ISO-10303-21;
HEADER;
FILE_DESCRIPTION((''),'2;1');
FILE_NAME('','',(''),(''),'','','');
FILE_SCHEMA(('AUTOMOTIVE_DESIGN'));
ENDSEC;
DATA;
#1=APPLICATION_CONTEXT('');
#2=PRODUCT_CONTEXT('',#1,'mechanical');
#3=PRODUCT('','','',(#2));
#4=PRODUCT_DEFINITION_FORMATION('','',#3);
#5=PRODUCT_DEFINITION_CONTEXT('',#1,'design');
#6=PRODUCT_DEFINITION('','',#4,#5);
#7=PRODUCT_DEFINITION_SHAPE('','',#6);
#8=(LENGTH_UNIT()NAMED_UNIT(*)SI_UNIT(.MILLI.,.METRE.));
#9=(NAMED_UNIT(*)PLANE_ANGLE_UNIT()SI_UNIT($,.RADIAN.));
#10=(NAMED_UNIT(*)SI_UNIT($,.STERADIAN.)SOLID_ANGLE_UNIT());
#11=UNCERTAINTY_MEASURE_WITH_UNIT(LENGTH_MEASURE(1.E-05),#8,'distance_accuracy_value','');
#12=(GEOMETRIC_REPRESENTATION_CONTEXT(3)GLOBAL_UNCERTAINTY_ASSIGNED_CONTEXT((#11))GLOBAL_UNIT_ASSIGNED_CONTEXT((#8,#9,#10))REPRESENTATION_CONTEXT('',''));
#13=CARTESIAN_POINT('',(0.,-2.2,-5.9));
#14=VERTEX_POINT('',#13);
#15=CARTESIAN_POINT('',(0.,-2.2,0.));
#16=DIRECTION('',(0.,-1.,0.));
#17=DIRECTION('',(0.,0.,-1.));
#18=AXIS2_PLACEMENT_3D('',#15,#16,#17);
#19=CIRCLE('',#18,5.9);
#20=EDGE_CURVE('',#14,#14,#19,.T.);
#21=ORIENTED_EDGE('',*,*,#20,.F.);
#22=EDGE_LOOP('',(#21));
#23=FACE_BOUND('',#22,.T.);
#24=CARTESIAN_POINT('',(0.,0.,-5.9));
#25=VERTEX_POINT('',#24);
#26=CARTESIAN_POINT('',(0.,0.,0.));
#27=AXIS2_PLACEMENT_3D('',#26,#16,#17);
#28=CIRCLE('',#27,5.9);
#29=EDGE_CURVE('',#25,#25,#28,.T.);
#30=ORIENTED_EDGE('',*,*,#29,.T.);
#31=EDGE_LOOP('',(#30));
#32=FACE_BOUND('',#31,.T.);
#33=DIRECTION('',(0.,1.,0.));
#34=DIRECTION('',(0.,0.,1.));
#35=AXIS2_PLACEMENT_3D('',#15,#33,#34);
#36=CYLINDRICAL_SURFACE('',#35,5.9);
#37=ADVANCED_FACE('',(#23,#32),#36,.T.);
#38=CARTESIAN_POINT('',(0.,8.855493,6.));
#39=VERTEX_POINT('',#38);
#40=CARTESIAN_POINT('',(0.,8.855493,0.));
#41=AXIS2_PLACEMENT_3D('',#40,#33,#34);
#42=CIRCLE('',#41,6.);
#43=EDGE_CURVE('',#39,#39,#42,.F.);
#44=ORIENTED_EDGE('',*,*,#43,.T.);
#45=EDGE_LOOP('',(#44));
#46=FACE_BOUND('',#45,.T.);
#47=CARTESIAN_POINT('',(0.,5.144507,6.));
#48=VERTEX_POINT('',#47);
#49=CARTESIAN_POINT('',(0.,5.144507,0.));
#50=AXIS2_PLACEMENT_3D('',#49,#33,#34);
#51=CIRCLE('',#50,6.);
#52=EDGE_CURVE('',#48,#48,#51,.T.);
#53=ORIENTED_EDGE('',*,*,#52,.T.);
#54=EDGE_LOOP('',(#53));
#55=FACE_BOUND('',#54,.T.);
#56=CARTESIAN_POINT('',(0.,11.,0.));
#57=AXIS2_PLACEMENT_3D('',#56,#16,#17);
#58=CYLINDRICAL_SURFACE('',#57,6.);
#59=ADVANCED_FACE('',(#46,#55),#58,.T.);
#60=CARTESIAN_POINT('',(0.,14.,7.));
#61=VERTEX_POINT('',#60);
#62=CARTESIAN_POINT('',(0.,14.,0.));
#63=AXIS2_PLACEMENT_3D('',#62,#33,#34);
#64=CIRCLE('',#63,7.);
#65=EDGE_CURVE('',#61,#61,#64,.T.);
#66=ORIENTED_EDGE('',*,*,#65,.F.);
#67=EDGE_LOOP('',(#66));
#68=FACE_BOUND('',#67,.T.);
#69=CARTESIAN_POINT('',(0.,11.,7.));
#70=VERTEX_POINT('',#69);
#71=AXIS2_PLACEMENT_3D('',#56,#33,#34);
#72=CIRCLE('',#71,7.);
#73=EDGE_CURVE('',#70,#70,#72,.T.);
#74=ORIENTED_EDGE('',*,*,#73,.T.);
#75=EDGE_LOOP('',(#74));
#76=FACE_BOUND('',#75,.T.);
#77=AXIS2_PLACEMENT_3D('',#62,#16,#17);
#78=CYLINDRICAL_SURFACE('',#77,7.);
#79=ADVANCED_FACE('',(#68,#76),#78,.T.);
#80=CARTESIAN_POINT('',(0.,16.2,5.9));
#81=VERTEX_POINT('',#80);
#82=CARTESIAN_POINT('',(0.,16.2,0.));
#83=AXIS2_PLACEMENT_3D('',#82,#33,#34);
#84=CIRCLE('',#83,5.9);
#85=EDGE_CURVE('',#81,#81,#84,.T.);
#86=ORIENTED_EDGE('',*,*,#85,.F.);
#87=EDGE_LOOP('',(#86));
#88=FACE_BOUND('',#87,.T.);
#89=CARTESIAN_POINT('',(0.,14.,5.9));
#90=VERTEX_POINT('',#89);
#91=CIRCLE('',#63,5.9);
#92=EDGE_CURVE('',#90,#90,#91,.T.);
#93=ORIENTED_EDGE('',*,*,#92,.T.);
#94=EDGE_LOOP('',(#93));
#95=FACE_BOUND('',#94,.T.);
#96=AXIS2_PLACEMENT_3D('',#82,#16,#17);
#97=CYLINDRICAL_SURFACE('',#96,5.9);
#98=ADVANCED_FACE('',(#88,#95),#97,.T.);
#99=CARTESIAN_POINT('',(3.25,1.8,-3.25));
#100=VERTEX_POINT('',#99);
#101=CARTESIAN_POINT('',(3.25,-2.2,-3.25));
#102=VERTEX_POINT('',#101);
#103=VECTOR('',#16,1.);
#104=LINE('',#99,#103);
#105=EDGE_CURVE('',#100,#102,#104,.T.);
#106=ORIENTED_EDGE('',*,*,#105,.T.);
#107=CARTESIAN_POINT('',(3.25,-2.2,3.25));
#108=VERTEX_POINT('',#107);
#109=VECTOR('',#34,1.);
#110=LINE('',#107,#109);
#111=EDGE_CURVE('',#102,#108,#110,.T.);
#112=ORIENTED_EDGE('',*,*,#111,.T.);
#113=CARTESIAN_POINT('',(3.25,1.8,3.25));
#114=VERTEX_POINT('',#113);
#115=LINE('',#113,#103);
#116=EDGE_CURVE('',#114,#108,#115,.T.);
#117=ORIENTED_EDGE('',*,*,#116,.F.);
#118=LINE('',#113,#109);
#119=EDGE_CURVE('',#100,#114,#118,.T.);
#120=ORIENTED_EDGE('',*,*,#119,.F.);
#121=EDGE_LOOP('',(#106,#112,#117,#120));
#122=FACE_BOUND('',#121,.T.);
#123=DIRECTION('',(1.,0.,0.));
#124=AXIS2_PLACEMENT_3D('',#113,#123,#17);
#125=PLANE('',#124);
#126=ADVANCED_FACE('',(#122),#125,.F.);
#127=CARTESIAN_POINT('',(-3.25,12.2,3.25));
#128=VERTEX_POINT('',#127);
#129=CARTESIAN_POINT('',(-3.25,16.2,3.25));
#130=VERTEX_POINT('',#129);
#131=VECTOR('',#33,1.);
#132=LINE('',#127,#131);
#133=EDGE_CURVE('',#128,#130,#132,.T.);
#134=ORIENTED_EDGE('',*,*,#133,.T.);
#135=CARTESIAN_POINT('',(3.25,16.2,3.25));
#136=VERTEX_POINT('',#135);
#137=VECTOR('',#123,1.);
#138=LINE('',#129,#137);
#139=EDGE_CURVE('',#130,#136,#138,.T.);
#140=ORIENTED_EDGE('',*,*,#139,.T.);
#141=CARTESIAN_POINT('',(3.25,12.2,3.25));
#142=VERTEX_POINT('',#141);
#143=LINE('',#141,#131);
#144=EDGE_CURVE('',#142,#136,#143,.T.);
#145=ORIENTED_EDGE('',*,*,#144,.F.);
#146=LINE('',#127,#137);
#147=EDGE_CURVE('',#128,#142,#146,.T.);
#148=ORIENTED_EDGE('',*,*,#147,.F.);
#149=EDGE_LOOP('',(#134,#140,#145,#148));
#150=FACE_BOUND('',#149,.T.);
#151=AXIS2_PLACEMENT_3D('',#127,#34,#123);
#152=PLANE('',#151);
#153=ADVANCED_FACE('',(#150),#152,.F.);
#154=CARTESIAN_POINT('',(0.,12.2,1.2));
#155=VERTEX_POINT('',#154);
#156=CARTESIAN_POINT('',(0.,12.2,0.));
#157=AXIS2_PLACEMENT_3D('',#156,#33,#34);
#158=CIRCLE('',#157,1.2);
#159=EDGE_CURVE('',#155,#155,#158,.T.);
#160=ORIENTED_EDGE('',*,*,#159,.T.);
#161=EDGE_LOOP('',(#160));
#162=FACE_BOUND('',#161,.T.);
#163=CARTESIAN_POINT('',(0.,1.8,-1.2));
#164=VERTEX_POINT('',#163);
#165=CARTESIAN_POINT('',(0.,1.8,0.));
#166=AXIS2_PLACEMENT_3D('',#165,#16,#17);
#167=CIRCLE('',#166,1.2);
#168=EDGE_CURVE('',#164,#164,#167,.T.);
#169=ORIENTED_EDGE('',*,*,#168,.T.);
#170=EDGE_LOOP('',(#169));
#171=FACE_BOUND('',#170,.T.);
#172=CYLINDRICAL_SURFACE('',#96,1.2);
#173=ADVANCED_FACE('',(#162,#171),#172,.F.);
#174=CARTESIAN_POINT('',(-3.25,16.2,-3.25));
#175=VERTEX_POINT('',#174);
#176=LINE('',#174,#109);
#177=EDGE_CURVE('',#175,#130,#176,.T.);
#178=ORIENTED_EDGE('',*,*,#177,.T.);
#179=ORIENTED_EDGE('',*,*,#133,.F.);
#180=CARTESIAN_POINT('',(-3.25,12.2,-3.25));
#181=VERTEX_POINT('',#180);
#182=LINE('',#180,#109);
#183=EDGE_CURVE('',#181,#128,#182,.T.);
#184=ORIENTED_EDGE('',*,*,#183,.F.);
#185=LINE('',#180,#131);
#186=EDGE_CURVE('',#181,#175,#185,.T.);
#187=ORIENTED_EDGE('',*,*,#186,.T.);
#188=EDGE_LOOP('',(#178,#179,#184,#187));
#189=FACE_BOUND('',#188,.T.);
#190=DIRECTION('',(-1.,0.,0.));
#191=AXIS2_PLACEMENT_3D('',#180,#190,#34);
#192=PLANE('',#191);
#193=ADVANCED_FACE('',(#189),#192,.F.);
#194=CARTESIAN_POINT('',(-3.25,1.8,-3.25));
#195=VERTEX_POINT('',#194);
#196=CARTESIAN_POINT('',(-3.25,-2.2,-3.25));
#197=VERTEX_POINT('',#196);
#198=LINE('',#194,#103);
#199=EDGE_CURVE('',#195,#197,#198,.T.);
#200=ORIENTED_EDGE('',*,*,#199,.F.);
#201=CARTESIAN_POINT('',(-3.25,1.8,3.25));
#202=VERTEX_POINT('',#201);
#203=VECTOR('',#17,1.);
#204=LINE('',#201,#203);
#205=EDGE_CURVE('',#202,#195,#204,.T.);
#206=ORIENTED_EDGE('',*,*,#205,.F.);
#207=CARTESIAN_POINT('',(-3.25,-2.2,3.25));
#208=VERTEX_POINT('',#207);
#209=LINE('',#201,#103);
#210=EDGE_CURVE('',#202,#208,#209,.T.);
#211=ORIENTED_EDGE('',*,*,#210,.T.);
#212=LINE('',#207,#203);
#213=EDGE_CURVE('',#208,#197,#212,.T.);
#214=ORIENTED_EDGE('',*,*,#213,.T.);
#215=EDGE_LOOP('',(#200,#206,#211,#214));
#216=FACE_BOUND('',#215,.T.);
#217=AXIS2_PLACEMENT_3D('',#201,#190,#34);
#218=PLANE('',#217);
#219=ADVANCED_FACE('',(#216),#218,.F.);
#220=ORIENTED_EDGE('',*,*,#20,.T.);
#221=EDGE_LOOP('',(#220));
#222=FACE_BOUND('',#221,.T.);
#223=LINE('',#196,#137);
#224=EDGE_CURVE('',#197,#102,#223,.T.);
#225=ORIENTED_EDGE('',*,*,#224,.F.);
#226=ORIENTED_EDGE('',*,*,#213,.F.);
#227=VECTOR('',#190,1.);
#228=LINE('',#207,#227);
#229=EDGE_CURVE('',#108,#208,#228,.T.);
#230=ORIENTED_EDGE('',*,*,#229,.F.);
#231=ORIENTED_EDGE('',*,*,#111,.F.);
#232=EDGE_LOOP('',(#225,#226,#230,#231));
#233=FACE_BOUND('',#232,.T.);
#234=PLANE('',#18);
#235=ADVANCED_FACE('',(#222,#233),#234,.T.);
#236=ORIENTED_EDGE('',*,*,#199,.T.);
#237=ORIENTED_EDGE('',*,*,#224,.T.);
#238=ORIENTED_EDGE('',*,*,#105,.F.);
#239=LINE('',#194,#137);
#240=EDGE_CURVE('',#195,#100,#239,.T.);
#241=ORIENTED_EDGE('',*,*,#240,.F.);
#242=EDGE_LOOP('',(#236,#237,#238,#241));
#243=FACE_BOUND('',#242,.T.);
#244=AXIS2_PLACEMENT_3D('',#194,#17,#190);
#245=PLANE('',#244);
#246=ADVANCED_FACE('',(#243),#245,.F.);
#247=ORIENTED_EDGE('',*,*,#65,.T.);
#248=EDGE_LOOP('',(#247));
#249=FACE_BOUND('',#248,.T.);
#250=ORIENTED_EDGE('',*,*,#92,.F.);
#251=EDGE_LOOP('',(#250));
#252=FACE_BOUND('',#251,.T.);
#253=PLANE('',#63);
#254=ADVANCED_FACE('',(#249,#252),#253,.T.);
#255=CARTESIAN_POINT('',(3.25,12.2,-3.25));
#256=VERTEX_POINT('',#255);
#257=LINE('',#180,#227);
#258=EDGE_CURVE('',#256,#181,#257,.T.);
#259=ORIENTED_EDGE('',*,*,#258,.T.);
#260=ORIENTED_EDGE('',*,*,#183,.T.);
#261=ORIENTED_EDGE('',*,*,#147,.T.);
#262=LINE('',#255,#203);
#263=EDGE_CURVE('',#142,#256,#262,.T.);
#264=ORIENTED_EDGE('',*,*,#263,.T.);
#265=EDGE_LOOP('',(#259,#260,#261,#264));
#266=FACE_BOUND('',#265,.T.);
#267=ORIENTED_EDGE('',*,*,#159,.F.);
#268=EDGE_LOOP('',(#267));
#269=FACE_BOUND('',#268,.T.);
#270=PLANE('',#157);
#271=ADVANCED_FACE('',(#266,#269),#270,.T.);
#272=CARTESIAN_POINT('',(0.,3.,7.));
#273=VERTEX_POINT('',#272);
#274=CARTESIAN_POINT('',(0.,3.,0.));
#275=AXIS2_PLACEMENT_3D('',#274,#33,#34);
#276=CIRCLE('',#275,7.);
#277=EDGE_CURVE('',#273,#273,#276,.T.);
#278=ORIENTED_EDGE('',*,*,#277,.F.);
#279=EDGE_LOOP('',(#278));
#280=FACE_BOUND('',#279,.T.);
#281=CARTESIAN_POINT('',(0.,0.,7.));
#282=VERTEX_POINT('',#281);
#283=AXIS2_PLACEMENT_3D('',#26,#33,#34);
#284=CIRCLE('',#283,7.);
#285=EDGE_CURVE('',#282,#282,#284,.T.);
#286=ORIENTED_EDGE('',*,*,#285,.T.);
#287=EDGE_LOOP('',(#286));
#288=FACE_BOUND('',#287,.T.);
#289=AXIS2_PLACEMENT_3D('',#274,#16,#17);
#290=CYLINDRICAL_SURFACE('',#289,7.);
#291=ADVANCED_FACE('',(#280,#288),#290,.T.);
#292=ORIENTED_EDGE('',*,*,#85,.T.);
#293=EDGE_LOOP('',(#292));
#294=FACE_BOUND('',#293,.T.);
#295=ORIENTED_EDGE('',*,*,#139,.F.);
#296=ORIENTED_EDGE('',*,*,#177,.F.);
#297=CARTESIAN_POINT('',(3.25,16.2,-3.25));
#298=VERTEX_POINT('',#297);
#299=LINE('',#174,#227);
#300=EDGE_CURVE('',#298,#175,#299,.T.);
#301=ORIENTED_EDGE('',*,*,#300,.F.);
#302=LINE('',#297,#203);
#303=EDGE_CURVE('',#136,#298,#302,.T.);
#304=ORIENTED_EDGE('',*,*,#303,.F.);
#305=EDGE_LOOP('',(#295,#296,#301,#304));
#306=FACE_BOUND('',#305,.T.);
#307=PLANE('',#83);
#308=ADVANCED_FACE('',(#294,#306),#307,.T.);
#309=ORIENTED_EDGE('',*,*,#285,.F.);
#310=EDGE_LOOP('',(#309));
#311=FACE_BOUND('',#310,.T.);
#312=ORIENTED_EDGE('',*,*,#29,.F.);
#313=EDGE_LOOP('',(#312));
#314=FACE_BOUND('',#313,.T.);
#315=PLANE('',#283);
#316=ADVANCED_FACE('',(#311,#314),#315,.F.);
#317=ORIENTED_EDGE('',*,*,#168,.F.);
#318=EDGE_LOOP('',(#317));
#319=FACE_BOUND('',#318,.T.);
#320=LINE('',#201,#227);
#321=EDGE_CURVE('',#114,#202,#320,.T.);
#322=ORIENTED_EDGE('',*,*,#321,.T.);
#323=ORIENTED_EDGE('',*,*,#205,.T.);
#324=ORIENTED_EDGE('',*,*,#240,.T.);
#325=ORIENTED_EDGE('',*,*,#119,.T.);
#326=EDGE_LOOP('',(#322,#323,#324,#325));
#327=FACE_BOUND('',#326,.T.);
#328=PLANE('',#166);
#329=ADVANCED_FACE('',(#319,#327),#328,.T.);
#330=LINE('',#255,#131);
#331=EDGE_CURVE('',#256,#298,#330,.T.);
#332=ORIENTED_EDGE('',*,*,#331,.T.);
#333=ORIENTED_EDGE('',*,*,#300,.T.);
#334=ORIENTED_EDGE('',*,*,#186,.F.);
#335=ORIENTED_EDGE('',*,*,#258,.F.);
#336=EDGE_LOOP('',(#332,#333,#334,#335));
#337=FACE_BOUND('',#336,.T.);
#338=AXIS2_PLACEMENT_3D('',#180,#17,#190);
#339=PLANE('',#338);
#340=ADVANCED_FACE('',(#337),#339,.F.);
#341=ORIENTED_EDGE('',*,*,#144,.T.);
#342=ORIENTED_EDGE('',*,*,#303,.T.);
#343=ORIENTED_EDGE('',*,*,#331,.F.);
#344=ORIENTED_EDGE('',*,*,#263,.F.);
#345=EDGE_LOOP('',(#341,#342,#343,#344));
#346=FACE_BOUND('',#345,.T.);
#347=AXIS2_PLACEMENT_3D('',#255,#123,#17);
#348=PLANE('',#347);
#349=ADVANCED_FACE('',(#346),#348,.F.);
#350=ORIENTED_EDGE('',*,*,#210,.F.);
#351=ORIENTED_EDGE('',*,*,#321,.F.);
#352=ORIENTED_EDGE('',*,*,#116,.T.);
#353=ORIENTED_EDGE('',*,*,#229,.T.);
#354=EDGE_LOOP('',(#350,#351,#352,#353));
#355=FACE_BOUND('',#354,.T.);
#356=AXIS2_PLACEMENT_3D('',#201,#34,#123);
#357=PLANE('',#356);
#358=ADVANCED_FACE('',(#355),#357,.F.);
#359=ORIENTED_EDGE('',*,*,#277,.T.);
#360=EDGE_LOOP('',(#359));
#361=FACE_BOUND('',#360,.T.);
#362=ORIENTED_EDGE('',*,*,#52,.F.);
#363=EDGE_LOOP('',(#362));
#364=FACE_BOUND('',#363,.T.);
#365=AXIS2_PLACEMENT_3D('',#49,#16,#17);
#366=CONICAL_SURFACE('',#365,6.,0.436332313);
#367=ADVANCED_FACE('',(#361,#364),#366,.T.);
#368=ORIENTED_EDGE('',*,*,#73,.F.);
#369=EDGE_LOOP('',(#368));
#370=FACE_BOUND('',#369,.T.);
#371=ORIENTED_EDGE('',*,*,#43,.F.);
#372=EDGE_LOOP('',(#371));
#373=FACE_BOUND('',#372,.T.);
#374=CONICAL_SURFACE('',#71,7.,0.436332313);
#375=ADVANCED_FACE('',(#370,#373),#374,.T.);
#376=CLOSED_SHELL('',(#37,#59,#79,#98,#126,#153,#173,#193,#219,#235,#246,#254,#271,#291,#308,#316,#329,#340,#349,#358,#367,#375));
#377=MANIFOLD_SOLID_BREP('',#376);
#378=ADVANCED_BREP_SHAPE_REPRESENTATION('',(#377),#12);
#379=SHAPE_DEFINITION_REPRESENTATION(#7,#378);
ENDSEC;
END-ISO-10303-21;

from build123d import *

# Parameters (mm, degrees)
SKETCH_1_R          = 7
EXTRUDE_1_DEPTH     = 3
SKETCH_2_R          = 6
EXTRUDE_2_DEPTH     = 8
SKETCH_3_R          = 7
EXTRUDE_3_DEPTH     = 3
CHAMFER_1_SIZE      = 2.144506921
CHAMFER_1_SIZE_2    = 1
CHAMFER_2_SIZE      = 2.144506921
CHAMFER_2_SIZE_2    = 1
SKETCH_4_R          = 5.9
EXTRUDE_4_DEPTH     = 2.2
EXTRUDE_START       = 2.2
SKETCH_5_R          = 5.9
EXTRUDE_5_DEPTH     = 2.2
SKETCH_6_W          = 6.5
SKETCH_6_H          = 6.5
CUT_EXTRUDE_1_DEPTH = 4
SKETCH_7_W          = 6.5
SKETCH_7_H          = 6.5
CUT_EXTRUDE_2_DEPTH = 4
SKETCH_8_R          = 1.2
CUT_EXTRUDE_3_DEPTH = 18.474552927


with BuildPart() as part:
    # Эскиз1 → Бобышка-Вытянуть1 (new body)
    with BuildSketch(Plane(origin=(0, 0, 0), x_dir=(1, 0, 0), z_dir=(0, 1, 0))):
        with Locations(Location((0, 0, 0), (0, 0, 270))):
            Circle(SKETCH_1_R)
    extrude(amount=EXTRUDE_1_DEPTH)

    # Эскиз2 → Бобышка-Вытянуть2 (add)
    with BuildSketch(Plane(origin=(0, 3, 0), x_dir=(1, 0, 0), z_dir=(0, 1, 0))):
        with Locations(Location((0, 0, 0), (0, 0, 270))):
            Circle(SKETCH_2_R)
    extrude(amount=EXTRUDE_2_DEPTH)

    # Эскиз3 → Бобышка-Вытянуть3 (add)
    with BuildSketch(Plane(origin=(0, 11, 0), x_dir=(1, 0, 0), z_dir=(0, 1, 0))):
        with Locations(Location((0, 0, 0), (0, 0, 270))):
            Circle(SKETCH_3_R)
    extrude(amount=EXTRUDE_3_DEPTH)

    # Фаска1
    # the kernel refuses this chamfer: 2.144506921, 1 mm, written as the material it adds along each edge
    with BuildSketch(Plane(origin=(0, 3, 0), x_dir=(0, 0, 1), z_dir=(-1, 0, 0))) as chamfer_1_piece_1_section:
        Polygon((6, CHAMFER_1_SIZE), (6 + CHAMFER_1_SIZE_2, 0), (6, 0), align=None)
    chamfer_1_piece_1 = revolve(axis=Axis((0, 3, 0), (0, 1, 0)), mode=Mode.PRIVATE)
    chamfer_1_piece_1 = chamfer_1_piece_1 & Plane(origin=(0, 4.095664656, 0), x_dir=(0, 0, 1), z_dir=(0, -1, 0)) * Cylinder(7, 28, mode=Mode.PRIVATE)
    add(chamfer_1_piece_1)

    # Фаска2
    # the kernel refuses this chamfer: 2.144506921, 1 mm, written as the material it adds along each edge
    with BuildSketch(Plane(origin=(0, 11, 0), x_dir=(0, 0, 1), z_dir=(-1, 0, 0))) as chamfer_2_piece_1_section:
        Polygon((6, -CHAMFER_2_SIZE), (6 + CHAMFER_2_SIZE_2, 0), (6, 0), align=None)
    chamfer_2_piece_1 = revolve(axis=Axis((0, 11, 0), (0, 1, 0)), mode=Mode.PRIVATE)
    chamfer_2_piece_1 = chamfer_2_piece_1 & Plane(origin=(0, 9.904335344, 0), x_dir=(0, 0, 1), z_dir=(0, -1, 0)) * Cylinder(7, 28, mode=Mode.PRIVATE)
    add(chamfer_2_piece_1)

    # Эскиз4 → Бобышка-Вытянуть4 (add)
    with BuildSketch(Plane(origin=(0, 14, 0), x_dir=(1, 0, 0), z_dir=(0, 1, 0))):
        with Locations(Location((0, 0, 0), (0, 0, 270))):
            Circle(SKETCH_4_R)
    extrude(amount=EXTRUDE_4_DEPTH)

    # Эскиз5 → Бобышка-Вытянуть5 (add)
    with BuildSketch(Plane.XZ.offset(EXTRUDE_START)):
        with Locations(Location((0, 0, 0), (0, 0, 90))):
            Circle(SKETCH_5_R)
    extrude(amount=-EXTRUDE_5_DEPTH)

    # Эскиз6 → Вырез-Вытянуть1 (cut)
    with BuildSketch(Plane(origin=(0, 16.2, 0), x_dir=(1, 0, 0), z_dir=(0, 1, 0))):
        Rectangle(SKETCH_6_W, SKETCH_6_H)
    extrude(amount=-CUT_EXTRUDE_1_DEPTH, mode=Mode.SUBTRACT)

    # Эскиз7 → Вырез-Вытянуть2 (cut)
    with BuildSketch(Plane.XZ.offset(2.2)):
        Rectangle(SKETCH_7_W, SKETCH_7_H)
    extrude(amount=-CUT_EXTRUDE_2_DEPTH, mode=Mode.SUBTRACT)

    # Эскиз8 → Вырез-Вытянуть3 (cut, through all)
    with BuildSketch(Plane.XZ.offset(-1.8)):
        with Locations(Location((0, 0, 0), (0, 0, 270))):
            Circle(SKETCH_8_R)
    extrude(amount=-CUT_EXTRUDE_3_DEPTH, mode=Mode.SUBTRACT)


solid = part.part
